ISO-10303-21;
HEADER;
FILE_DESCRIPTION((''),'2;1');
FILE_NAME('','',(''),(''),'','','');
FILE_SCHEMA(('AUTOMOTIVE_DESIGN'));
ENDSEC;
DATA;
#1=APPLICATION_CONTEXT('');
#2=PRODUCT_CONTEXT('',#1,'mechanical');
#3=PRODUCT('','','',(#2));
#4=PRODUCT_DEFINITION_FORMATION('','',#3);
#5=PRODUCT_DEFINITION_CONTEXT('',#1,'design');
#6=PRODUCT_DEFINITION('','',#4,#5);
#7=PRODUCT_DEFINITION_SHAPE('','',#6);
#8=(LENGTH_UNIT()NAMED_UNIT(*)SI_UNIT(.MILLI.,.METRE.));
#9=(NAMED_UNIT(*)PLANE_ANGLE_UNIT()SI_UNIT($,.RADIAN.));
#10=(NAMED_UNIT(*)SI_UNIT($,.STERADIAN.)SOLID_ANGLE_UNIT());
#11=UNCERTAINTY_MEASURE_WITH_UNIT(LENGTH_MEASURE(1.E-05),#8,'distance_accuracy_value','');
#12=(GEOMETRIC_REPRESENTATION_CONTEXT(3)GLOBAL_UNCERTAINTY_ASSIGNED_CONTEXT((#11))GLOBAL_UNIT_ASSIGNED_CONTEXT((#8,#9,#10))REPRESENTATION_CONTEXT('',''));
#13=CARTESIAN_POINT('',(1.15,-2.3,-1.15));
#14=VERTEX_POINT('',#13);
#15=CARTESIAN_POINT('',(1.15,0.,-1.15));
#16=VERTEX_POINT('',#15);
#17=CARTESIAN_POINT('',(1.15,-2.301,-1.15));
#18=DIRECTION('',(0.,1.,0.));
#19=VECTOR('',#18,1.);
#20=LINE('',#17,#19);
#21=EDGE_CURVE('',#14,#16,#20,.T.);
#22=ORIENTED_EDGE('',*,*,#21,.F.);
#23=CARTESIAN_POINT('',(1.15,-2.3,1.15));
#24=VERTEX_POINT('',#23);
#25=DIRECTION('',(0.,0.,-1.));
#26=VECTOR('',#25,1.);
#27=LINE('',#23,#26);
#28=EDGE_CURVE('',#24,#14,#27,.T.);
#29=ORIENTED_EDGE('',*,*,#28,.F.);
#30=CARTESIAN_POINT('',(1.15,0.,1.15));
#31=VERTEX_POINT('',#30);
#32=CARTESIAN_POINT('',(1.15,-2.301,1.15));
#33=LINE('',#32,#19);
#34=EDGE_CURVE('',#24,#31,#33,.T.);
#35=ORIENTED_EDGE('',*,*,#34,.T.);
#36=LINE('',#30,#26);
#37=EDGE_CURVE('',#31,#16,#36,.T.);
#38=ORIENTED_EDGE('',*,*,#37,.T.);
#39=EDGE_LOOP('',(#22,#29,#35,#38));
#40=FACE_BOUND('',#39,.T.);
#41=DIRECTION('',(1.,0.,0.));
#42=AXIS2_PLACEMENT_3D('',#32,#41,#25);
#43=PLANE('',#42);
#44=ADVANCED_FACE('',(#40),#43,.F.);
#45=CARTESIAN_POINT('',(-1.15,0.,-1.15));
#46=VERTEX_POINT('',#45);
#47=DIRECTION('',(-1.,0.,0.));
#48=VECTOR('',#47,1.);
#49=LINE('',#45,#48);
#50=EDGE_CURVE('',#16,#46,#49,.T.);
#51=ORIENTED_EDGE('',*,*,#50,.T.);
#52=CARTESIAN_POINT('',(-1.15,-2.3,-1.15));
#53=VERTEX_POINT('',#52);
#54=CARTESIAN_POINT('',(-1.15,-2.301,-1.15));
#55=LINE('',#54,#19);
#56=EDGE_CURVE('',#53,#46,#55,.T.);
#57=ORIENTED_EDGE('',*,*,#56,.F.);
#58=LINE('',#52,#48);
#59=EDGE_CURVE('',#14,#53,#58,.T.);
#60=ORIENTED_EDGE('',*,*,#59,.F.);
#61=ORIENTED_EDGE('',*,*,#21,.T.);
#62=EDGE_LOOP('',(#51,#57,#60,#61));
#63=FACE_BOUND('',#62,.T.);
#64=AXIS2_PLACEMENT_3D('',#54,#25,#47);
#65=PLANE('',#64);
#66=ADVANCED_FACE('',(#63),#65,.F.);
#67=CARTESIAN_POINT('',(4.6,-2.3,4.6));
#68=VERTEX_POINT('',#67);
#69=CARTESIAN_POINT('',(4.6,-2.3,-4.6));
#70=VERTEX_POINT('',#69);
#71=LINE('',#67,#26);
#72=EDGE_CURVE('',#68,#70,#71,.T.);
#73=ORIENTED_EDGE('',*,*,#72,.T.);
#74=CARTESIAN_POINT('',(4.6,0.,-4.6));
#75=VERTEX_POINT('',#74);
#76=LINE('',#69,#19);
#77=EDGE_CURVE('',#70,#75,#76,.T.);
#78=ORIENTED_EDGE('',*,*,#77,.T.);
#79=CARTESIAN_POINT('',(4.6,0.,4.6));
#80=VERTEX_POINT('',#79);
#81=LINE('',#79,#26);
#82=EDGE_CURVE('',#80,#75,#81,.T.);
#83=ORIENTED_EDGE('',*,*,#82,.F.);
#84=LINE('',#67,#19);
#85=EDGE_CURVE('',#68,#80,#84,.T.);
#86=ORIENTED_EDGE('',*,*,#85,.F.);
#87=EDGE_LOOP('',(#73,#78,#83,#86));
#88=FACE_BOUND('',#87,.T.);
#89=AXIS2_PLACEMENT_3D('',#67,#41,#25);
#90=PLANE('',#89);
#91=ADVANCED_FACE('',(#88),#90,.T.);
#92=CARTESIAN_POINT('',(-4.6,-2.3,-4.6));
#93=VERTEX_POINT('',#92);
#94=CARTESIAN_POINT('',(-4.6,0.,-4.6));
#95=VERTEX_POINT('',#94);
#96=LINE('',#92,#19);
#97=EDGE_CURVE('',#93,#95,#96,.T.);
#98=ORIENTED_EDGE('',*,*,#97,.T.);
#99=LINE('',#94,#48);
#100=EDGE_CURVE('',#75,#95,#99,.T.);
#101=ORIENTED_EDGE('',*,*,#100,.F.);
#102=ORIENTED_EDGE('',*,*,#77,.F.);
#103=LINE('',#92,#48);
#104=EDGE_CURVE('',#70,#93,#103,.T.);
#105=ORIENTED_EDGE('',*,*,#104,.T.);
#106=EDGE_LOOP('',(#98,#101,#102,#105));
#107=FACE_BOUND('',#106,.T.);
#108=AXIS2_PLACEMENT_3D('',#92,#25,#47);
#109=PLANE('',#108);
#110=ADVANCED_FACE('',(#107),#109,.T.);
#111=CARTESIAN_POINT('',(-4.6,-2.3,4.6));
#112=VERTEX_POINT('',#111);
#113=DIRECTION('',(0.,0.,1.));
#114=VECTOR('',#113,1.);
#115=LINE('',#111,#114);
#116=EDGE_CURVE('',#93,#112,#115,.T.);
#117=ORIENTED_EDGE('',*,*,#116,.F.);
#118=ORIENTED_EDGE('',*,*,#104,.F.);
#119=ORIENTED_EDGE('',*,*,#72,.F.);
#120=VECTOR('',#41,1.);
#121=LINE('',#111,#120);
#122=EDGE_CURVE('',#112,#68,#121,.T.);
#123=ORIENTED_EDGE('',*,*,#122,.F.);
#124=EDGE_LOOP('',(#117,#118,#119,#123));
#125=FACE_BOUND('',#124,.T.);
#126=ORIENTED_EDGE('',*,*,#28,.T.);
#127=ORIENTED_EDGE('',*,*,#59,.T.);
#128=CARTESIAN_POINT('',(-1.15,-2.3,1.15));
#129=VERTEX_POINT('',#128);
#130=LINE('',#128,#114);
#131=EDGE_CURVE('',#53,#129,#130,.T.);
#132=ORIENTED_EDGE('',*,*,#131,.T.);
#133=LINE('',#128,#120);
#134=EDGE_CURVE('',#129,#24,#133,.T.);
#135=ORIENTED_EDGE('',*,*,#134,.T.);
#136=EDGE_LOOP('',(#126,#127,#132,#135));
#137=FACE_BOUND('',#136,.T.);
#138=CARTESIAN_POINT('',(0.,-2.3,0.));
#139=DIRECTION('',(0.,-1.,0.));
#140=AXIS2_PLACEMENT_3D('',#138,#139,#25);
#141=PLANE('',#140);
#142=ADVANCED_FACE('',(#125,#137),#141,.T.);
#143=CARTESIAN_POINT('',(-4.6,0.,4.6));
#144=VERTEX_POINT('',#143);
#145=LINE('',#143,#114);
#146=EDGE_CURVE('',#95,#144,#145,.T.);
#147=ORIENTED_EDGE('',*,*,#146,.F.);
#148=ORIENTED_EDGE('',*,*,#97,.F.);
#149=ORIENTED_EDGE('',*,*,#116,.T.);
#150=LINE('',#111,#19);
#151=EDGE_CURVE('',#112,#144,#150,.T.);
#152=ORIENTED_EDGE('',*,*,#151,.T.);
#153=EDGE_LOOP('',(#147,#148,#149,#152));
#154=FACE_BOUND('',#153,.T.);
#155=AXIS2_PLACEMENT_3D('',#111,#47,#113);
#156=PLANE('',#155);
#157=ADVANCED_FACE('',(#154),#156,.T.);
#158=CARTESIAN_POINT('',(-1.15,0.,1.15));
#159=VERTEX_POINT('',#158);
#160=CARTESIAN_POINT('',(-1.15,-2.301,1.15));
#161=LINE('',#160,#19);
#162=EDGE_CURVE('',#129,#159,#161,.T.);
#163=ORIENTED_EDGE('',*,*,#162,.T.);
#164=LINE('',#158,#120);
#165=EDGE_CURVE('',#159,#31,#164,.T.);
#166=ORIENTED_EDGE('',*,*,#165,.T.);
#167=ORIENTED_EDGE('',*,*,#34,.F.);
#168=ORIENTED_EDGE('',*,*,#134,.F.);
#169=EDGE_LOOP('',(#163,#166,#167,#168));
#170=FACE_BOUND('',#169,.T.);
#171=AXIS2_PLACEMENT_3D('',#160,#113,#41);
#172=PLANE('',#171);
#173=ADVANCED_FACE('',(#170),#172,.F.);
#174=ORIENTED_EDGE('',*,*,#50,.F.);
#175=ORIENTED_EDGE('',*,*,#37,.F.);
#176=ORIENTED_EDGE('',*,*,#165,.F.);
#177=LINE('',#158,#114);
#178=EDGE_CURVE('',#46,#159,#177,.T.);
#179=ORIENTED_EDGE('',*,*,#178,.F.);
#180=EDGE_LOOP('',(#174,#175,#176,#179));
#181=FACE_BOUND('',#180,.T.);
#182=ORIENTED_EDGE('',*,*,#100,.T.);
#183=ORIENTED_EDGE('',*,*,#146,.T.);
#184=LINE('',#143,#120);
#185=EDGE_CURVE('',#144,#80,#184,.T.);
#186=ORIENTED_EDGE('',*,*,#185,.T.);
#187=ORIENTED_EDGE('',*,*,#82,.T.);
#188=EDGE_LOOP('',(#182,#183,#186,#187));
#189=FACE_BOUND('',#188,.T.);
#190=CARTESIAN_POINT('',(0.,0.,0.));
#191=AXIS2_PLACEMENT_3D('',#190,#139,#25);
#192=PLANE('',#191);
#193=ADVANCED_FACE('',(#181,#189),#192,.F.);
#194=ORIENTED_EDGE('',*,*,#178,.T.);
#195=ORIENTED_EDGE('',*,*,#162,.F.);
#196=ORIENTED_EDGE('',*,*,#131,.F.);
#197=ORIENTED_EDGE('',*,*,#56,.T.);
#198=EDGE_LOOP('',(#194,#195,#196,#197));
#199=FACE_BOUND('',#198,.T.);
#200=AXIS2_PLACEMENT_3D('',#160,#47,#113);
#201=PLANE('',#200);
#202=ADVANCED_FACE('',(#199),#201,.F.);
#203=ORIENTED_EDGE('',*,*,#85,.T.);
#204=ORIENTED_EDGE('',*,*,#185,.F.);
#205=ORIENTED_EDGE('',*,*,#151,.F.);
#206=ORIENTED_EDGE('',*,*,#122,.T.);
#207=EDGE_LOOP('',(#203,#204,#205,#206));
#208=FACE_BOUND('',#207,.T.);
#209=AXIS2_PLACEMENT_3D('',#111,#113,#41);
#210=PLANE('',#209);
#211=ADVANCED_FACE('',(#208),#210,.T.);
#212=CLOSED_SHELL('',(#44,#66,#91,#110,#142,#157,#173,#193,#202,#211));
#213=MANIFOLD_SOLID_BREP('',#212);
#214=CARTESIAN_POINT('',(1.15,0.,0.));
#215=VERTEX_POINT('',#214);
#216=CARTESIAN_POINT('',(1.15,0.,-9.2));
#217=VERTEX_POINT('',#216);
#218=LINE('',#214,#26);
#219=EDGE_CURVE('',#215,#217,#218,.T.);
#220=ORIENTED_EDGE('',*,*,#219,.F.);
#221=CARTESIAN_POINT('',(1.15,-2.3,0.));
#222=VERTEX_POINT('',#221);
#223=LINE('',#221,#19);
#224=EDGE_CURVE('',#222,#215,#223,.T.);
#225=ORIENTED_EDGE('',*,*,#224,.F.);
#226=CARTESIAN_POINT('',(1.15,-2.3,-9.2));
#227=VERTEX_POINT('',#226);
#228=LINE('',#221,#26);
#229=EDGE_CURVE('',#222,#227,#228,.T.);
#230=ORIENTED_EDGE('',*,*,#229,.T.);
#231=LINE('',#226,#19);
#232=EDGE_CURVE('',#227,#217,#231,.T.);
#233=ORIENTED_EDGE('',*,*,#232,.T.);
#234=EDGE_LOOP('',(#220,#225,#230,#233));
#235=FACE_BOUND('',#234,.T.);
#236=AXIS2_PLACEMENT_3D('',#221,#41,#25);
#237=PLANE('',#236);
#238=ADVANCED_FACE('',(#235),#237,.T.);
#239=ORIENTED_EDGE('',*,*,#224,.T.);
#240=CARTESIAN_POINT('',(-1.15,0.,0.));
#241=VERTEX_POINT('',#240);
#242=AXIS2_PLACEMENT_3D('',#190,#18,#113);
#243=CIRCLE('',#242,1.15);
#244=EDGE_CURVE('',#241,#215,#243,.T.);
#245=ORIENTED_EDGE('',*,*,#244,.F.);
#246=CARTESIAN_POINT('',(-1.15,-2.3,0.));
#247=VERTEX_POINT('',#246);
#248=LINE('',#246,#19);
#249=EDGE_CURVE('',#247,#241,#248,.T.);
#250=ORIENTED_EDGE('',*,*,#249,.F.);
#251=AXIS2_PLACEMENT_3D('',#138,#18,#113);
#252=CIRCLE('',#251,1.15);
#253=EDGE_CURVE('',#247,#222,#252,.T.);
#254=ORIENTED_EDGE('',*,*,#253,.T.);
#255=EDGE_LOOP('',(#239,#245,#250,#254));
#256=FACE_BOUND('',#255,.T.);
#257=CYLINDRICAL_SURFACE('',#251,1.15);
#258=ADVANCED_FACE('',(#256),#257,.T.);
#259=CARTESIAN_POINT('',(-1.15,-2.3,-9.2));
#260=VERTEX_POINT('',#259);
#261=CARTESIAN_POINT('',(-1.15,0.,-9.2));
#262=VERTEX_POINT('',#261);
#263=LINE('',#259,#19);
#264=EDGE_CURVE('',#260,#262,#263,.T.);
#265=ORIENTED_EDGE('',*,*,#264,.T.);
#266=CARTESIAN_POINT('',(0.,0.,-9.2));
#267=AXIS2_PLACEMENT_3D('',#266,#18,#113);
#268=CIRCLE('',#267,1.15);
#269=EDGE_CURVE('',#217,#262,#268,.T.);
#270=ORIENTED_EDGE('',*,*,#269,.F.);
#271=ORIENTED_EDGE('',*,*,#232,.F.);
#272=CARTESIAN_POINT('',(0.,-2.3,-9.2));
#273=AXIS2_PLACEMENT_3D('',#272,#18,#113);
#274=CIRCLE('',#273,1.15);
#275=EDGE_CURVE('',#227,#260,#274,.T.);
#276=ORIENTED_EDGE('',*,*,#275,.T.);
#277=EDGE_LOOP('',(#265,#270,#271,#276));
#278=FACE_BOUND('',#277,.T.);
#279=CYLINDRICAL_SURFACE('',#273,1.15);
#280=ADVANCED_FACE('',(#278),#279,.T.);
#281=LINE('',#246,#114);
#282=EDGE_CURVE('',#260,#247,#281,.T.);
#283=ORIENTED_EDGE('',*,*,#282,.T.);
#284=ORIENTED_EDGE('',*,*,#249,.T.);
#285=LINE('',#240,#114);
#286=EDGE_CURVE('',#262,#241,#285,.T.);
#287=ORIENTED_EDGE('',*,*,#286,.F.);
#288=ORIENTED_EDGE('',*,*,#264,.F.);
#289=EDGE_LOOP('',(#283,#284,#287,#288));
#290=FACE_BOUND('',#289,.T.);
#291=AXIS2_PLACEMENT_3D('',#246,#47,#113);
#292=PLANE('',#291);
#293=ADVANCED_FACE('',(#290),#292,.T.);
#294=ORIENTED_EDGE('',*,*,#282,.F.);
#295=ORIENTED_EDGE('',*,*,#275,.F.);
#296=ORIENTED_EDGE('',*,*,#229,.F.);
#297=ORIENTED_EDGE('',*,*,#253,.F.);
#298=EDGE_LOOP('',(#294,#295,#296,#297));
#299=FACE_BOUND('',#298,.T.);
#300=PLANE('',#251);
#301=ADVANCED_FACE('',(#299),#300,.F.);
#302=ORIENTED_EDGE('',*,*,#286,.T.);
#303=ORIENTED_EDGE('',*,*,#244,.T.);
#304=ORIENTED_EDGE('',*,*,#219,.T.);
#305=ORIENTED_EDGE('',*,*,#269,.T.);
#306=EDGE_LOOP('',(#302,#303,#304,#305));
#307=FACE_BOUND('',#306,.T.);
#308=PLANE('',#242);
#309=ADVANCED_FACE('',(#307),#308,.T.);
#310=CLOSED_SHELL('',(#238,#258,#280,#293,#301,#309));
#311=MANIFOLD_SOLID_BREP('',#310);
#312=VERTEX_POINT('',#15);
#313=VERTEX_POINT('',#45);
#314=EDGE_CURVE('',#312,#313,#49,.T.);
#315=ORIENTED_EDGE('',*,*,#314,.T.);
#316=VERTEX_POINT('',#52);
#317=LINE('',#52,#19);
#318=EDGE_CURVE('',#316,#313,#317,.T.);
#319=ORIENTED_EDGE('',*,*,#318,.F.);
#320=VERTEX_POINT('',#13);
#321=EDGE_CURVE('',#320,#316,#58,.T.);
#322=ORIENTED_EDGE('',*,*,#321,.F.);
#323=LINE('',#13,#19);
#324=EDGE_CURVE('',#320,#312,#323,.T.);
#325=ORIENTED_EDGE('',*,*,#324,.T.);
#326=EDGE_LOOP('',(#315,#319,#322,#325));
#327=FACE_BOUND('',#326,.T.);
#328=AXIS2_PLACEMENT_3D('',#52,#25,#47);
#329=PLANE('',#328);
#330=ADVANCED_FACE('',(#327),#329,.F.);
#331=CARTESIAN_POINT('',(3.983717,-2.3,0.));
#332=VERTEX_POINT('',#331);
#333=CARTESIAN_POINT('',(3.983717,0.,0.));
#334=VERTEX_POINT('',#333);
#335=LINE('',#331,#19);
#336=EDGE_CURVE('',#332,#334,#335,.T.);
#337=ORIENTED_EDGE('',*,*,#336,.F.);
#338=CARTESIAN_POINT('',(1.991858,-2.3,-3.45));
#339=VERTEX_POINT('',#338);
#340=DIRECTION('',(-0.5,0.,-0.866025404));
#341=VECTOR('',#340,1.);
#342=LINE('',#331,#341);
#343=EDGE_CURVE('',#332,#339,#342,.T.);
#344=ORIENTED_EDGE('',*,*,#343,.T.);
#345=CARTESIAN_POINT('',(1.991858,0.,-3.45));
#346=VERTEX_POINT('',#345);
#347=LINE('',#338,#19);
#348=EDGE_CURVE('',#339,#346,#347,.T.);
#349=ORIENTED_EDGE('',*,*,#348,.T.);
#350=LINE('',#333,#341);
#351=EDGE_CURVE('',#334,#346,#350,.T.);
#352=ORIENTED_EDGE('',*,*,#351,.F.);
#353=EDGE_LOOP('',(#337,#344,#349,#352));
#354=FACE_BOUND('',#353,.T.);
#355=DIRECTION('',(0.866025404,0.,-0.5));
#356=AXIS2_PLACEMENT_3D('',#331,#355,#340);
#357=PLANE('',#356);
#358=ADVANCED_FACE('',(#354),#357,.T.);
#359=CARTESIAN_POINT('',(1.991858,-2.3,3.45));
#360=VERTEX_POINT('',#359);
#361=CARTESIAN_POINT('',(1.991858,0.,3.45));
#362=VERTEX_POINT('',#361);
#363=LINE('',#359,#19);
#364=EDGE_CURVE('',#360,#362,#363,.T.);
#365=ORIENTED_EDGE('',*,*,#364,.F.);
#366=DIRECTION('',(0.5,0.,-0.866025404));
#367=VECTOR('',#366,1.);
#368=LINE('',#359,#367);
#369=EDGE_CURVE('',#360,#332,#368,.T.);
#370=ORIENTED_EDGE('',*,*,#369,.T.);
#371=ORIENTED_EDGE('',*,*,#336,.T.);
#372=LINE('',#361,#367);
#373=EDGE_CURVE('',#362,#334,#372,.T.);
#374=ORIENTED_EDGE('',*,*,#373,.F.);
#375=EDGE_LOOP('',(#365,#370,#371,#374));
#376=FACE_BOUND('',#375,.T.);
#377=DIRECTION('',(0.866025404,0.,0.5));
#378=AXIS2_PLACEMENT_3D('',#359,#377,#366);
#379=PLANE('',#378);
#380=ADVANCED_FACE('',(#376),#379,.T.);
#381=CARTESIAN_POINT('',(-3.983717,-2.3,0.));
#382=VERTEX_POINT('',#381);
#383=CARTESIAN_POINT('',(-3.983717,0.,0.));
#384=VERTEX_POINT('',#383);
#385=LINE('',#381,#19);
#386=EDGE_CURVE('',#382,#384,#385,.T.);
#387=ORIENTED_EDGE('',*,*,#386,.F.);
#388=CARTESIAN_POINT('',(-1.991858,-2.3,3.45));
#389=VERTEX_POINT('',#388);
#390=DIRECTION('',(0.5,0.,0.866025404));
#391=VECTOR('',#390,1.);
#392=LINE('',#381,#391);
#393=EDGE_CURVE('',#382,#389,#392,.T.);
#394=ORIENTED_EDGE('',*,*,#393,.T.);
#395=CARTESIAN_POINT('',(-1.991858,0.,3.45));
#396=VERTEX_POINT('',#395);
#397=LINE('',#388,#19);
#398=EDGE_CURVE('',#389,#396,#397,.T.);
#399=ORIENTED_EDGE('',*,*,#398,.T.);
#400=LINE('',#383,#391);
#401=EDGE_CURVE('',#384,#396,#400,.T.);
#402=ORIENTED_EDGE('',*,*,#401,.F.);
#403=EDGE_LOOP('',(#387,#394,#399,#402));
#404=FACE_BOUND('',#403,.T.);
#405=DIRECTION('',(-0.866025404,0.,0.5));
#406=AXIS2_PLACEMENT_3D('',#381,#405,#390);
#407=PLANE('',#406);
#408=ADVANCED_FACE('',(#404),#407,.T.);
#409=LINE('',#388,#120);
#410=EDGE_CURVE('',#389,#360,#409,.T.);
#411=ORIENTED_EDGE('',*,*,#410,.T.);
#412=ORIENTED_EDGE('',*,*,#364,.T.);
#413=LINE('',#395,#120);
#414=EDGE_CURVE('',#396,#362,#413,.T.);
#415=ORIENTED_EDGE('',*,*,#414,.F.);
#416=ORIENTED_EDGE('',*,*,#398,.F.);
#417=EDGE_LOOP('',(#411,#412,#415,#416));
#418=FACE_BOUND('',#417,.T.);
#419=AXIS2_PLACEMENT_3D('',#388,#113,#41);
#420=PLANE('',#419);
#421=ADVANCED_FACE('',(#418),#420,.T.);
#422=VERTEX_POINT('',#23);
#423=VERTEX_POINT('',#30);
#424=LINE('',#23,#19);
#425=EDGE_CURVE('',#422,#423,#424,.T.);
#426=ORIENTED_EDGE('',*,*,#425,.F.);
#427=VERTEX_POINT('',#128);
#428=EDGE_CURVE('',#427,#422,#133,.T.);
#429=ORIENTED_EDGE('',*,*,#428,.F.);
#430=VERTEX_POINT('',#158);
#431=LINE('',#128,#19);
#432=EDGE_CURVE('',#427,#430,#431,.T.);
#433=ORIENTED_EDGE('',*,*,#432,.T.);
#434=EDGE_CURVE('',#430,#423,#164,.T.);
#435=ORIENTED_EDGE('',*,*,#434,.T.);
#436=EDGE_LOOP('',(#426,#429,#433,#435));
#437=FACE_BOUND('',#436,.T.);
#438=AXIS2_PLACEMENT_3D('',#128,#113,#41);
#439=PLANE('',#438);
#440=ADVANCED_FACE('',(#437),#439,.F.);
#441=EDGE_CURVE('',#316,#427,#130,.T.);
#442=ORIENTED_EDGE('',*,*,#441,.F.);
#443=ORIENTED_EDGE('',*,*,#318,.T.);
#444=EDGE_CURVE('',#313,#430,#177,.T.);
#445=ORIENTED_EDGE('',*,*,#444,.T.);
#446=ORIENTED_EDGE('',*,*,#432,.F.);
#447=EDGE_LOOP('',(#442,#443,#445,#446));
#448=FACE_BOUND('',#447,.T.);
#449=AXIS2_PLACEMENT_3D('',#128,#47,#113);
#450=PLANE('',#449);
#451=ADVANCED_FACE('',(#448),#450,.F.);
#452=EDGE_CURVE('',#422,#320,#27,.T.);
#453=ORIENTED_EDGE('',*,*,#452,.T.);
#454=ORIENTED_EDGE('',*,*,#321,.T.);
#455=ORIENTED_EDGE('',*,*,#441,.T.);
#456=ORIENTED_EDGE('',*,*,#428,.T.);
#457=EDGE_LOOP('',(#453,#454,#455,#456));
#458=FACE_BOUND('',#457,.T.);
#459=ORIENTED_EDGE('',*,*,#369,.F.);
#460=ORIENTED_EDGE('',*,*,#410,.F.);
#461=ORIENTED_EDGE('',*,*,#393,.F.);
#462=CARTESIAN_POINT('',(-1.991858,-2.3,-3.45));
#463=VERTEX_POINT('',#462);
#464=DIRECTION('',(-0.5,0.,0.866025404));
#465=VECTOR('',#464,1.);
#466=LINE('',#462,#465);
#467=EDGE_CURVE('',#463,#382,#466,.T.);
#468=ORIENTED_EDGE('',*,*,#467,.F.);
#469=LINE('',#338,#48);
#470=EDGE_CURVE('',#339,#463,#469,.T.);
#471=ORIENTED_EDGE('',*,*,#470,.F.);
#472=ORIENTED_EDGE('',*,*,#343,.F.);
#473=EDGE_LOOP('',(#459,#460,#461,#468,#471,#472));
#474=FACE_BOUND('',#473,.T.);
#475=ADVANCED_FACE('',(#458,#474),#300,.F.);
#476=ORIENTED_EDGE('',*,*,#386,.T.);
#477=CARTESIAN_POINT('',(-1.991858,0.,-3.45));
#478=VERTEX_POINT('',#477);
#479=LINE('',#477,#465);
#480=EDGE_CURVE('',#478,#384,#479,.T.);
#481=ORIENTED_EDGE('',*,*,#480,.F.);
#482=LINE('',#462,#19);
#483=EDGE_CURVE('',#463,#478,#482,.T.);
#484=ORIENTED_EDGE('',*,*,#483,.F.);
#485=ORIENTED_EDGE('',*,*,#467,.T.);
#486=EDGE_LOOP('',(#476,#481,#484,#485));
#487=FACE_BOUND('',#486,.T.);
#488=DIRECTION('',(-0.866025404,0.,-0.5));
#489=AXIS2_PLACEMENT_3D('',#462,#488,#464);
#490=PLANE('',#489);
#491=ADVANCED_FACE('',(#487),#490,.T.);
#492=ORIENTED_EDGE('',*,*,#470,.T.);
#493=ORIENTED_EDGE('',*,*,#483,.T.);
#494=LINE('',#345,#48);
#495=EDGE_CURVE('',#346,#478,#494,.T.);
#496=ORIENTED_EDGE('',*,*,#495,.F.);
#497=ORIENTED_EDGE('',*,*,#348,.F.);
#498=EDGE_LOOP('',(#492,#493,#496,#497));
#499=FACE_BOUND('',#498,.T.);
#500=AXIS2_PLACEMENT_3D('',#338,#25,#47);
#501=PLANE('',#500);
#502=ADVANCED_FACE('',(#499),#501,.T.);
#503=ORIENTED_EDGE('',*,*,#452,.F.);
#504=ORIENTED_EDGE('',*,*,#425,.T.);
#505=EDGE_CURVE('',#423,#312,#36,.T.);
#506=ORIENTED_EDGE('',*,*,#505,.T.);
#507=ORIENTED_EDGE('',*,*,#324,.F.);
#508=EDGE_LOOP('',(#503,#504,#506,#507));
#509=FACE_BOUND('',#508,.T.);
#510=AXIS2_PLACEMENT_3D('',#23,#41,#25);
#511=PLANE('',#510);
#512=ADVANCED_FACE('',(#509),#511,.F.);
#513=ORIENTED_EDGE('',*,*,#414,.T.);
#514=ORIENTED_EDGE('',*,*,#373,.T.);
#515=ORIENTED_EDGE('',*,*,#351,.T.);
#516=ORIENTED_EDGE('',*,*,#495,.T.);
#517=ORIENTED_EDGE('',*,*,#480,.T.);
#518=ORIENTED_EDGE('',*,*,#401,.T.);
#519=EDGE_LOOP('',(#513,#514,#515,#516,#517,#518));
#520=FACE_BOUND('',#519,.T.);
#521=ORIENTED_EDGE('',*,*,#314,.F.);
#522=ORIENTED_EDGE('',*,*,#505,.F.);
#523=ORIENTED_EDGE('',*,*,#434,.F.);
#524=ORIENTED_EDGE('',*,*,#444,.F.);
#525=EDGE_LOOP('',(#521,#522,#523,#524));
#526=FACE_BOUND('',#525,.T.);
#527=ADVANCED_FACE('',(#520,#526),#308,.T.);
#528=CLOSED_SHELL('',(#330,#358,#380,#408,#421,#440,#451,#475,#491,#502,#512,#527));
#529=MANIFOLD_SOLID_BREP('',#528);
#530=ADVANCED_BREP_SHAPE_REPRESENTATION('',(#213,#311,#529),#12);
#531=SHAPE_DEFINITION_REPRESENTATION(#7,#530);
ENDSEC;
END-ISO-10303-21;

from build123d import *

# Parameters (mm, degrees)
BASE_FLANGE1_DEPTH = 2.3
SKETCH6_W          = 9.2
SKETCH6_H          = 9.2
BASE_FLANGE2_DEPTH = 2.3
SKETCH9_W          = 2.3
SKETCH9_H          = 2.3
CUT_EXTRUDE1_DEPTH = 2.3
BASE_FLANGE3_DEPTH = 2.3
SKETCH13_W         = 2.3
SKETCH13_H         = 2.3
CUT_EXTRUDE2_DEPTH = 12.557356964


# Sheet-metal steps are written as plain solids
with BuildPart() as part:
    # Sketch1 → Base-Flange1 (new body)
    with BuildSketch(Plane(origin=(0, 0, 0), x_dir=(1, 0, 0), z_dir=(0, 1, 0))):
        with BuildLine():
            Line((-1.15, 0), (-1.15, 9.2))
            ThreePointArc((-1.15, 9.2), (0, 10.35), (1.15, 9.2))
            Line((1.15, 9.2), (1.15, 0))
            ThreePointArc((1.15, 0), (0, -1.15), (-1.15, 0))
        make_face()
    extrude(amount=-BASE_FLANGE1_DEPTH)


with BuildPart() as body_2:
    # Sketch6 → Base-Flange2 (new body)
    with BuildSketch(Plane(origin=(0, 0, 0), x_dir=(1, 0, 0), z_dir=(0, 1, 0))):
        Rectangle(SKETCH6_W, SKETCH6_H)
    extrude(amount=-BASE_FLANGE2_DEPTH)

    # Sketch9 → Cut-Extrude1 (cut)
    with BuildSketch(Plane(origin=(0, 0, 0), x_dir=(1, 0, 0), z_dir=(0, 1, 0))):
        Rectangle(SKETCH9_W, SKETCH9_H)
    extrude(amount=-CUT_EXTRUDE1_DEPTH, mode=Mode.SUBTRACT)


with BuildPart() as body_3:
    # Sketch10 → Base-Flange3 (new body)
    with BuildSketch(Plane(origin=(0, 0, 0), x_dir=(1, 0, 0), z_dir=(0, 1, 0))):
        Polygon((3.983716857, 0), (1.991858429, 3.45), (-1.991858429, 3.45), (-3.983716857, 0), (-1.991858429, -3.45), (1.991858429, -3.45), align=None)
    extrude(amount=-BASE_FLANGE3_DEPTH)

    # Sketch13 → Cut-Extrude2 (cut, through all)
    with BuildSketch(Plane(origin=(0, 0, 0), x_dir=(1, 0, 0), z_dir=(0, 1, 0))):
        Rectangle(SKETCH13_W, SKETCH13_H)
    extrude(amount=-CUT_EXTRUDE2_DEPTH, mode=Mode.SUBTRACT)


solid = Compound([part.part, body_2.part, body_3.part])
